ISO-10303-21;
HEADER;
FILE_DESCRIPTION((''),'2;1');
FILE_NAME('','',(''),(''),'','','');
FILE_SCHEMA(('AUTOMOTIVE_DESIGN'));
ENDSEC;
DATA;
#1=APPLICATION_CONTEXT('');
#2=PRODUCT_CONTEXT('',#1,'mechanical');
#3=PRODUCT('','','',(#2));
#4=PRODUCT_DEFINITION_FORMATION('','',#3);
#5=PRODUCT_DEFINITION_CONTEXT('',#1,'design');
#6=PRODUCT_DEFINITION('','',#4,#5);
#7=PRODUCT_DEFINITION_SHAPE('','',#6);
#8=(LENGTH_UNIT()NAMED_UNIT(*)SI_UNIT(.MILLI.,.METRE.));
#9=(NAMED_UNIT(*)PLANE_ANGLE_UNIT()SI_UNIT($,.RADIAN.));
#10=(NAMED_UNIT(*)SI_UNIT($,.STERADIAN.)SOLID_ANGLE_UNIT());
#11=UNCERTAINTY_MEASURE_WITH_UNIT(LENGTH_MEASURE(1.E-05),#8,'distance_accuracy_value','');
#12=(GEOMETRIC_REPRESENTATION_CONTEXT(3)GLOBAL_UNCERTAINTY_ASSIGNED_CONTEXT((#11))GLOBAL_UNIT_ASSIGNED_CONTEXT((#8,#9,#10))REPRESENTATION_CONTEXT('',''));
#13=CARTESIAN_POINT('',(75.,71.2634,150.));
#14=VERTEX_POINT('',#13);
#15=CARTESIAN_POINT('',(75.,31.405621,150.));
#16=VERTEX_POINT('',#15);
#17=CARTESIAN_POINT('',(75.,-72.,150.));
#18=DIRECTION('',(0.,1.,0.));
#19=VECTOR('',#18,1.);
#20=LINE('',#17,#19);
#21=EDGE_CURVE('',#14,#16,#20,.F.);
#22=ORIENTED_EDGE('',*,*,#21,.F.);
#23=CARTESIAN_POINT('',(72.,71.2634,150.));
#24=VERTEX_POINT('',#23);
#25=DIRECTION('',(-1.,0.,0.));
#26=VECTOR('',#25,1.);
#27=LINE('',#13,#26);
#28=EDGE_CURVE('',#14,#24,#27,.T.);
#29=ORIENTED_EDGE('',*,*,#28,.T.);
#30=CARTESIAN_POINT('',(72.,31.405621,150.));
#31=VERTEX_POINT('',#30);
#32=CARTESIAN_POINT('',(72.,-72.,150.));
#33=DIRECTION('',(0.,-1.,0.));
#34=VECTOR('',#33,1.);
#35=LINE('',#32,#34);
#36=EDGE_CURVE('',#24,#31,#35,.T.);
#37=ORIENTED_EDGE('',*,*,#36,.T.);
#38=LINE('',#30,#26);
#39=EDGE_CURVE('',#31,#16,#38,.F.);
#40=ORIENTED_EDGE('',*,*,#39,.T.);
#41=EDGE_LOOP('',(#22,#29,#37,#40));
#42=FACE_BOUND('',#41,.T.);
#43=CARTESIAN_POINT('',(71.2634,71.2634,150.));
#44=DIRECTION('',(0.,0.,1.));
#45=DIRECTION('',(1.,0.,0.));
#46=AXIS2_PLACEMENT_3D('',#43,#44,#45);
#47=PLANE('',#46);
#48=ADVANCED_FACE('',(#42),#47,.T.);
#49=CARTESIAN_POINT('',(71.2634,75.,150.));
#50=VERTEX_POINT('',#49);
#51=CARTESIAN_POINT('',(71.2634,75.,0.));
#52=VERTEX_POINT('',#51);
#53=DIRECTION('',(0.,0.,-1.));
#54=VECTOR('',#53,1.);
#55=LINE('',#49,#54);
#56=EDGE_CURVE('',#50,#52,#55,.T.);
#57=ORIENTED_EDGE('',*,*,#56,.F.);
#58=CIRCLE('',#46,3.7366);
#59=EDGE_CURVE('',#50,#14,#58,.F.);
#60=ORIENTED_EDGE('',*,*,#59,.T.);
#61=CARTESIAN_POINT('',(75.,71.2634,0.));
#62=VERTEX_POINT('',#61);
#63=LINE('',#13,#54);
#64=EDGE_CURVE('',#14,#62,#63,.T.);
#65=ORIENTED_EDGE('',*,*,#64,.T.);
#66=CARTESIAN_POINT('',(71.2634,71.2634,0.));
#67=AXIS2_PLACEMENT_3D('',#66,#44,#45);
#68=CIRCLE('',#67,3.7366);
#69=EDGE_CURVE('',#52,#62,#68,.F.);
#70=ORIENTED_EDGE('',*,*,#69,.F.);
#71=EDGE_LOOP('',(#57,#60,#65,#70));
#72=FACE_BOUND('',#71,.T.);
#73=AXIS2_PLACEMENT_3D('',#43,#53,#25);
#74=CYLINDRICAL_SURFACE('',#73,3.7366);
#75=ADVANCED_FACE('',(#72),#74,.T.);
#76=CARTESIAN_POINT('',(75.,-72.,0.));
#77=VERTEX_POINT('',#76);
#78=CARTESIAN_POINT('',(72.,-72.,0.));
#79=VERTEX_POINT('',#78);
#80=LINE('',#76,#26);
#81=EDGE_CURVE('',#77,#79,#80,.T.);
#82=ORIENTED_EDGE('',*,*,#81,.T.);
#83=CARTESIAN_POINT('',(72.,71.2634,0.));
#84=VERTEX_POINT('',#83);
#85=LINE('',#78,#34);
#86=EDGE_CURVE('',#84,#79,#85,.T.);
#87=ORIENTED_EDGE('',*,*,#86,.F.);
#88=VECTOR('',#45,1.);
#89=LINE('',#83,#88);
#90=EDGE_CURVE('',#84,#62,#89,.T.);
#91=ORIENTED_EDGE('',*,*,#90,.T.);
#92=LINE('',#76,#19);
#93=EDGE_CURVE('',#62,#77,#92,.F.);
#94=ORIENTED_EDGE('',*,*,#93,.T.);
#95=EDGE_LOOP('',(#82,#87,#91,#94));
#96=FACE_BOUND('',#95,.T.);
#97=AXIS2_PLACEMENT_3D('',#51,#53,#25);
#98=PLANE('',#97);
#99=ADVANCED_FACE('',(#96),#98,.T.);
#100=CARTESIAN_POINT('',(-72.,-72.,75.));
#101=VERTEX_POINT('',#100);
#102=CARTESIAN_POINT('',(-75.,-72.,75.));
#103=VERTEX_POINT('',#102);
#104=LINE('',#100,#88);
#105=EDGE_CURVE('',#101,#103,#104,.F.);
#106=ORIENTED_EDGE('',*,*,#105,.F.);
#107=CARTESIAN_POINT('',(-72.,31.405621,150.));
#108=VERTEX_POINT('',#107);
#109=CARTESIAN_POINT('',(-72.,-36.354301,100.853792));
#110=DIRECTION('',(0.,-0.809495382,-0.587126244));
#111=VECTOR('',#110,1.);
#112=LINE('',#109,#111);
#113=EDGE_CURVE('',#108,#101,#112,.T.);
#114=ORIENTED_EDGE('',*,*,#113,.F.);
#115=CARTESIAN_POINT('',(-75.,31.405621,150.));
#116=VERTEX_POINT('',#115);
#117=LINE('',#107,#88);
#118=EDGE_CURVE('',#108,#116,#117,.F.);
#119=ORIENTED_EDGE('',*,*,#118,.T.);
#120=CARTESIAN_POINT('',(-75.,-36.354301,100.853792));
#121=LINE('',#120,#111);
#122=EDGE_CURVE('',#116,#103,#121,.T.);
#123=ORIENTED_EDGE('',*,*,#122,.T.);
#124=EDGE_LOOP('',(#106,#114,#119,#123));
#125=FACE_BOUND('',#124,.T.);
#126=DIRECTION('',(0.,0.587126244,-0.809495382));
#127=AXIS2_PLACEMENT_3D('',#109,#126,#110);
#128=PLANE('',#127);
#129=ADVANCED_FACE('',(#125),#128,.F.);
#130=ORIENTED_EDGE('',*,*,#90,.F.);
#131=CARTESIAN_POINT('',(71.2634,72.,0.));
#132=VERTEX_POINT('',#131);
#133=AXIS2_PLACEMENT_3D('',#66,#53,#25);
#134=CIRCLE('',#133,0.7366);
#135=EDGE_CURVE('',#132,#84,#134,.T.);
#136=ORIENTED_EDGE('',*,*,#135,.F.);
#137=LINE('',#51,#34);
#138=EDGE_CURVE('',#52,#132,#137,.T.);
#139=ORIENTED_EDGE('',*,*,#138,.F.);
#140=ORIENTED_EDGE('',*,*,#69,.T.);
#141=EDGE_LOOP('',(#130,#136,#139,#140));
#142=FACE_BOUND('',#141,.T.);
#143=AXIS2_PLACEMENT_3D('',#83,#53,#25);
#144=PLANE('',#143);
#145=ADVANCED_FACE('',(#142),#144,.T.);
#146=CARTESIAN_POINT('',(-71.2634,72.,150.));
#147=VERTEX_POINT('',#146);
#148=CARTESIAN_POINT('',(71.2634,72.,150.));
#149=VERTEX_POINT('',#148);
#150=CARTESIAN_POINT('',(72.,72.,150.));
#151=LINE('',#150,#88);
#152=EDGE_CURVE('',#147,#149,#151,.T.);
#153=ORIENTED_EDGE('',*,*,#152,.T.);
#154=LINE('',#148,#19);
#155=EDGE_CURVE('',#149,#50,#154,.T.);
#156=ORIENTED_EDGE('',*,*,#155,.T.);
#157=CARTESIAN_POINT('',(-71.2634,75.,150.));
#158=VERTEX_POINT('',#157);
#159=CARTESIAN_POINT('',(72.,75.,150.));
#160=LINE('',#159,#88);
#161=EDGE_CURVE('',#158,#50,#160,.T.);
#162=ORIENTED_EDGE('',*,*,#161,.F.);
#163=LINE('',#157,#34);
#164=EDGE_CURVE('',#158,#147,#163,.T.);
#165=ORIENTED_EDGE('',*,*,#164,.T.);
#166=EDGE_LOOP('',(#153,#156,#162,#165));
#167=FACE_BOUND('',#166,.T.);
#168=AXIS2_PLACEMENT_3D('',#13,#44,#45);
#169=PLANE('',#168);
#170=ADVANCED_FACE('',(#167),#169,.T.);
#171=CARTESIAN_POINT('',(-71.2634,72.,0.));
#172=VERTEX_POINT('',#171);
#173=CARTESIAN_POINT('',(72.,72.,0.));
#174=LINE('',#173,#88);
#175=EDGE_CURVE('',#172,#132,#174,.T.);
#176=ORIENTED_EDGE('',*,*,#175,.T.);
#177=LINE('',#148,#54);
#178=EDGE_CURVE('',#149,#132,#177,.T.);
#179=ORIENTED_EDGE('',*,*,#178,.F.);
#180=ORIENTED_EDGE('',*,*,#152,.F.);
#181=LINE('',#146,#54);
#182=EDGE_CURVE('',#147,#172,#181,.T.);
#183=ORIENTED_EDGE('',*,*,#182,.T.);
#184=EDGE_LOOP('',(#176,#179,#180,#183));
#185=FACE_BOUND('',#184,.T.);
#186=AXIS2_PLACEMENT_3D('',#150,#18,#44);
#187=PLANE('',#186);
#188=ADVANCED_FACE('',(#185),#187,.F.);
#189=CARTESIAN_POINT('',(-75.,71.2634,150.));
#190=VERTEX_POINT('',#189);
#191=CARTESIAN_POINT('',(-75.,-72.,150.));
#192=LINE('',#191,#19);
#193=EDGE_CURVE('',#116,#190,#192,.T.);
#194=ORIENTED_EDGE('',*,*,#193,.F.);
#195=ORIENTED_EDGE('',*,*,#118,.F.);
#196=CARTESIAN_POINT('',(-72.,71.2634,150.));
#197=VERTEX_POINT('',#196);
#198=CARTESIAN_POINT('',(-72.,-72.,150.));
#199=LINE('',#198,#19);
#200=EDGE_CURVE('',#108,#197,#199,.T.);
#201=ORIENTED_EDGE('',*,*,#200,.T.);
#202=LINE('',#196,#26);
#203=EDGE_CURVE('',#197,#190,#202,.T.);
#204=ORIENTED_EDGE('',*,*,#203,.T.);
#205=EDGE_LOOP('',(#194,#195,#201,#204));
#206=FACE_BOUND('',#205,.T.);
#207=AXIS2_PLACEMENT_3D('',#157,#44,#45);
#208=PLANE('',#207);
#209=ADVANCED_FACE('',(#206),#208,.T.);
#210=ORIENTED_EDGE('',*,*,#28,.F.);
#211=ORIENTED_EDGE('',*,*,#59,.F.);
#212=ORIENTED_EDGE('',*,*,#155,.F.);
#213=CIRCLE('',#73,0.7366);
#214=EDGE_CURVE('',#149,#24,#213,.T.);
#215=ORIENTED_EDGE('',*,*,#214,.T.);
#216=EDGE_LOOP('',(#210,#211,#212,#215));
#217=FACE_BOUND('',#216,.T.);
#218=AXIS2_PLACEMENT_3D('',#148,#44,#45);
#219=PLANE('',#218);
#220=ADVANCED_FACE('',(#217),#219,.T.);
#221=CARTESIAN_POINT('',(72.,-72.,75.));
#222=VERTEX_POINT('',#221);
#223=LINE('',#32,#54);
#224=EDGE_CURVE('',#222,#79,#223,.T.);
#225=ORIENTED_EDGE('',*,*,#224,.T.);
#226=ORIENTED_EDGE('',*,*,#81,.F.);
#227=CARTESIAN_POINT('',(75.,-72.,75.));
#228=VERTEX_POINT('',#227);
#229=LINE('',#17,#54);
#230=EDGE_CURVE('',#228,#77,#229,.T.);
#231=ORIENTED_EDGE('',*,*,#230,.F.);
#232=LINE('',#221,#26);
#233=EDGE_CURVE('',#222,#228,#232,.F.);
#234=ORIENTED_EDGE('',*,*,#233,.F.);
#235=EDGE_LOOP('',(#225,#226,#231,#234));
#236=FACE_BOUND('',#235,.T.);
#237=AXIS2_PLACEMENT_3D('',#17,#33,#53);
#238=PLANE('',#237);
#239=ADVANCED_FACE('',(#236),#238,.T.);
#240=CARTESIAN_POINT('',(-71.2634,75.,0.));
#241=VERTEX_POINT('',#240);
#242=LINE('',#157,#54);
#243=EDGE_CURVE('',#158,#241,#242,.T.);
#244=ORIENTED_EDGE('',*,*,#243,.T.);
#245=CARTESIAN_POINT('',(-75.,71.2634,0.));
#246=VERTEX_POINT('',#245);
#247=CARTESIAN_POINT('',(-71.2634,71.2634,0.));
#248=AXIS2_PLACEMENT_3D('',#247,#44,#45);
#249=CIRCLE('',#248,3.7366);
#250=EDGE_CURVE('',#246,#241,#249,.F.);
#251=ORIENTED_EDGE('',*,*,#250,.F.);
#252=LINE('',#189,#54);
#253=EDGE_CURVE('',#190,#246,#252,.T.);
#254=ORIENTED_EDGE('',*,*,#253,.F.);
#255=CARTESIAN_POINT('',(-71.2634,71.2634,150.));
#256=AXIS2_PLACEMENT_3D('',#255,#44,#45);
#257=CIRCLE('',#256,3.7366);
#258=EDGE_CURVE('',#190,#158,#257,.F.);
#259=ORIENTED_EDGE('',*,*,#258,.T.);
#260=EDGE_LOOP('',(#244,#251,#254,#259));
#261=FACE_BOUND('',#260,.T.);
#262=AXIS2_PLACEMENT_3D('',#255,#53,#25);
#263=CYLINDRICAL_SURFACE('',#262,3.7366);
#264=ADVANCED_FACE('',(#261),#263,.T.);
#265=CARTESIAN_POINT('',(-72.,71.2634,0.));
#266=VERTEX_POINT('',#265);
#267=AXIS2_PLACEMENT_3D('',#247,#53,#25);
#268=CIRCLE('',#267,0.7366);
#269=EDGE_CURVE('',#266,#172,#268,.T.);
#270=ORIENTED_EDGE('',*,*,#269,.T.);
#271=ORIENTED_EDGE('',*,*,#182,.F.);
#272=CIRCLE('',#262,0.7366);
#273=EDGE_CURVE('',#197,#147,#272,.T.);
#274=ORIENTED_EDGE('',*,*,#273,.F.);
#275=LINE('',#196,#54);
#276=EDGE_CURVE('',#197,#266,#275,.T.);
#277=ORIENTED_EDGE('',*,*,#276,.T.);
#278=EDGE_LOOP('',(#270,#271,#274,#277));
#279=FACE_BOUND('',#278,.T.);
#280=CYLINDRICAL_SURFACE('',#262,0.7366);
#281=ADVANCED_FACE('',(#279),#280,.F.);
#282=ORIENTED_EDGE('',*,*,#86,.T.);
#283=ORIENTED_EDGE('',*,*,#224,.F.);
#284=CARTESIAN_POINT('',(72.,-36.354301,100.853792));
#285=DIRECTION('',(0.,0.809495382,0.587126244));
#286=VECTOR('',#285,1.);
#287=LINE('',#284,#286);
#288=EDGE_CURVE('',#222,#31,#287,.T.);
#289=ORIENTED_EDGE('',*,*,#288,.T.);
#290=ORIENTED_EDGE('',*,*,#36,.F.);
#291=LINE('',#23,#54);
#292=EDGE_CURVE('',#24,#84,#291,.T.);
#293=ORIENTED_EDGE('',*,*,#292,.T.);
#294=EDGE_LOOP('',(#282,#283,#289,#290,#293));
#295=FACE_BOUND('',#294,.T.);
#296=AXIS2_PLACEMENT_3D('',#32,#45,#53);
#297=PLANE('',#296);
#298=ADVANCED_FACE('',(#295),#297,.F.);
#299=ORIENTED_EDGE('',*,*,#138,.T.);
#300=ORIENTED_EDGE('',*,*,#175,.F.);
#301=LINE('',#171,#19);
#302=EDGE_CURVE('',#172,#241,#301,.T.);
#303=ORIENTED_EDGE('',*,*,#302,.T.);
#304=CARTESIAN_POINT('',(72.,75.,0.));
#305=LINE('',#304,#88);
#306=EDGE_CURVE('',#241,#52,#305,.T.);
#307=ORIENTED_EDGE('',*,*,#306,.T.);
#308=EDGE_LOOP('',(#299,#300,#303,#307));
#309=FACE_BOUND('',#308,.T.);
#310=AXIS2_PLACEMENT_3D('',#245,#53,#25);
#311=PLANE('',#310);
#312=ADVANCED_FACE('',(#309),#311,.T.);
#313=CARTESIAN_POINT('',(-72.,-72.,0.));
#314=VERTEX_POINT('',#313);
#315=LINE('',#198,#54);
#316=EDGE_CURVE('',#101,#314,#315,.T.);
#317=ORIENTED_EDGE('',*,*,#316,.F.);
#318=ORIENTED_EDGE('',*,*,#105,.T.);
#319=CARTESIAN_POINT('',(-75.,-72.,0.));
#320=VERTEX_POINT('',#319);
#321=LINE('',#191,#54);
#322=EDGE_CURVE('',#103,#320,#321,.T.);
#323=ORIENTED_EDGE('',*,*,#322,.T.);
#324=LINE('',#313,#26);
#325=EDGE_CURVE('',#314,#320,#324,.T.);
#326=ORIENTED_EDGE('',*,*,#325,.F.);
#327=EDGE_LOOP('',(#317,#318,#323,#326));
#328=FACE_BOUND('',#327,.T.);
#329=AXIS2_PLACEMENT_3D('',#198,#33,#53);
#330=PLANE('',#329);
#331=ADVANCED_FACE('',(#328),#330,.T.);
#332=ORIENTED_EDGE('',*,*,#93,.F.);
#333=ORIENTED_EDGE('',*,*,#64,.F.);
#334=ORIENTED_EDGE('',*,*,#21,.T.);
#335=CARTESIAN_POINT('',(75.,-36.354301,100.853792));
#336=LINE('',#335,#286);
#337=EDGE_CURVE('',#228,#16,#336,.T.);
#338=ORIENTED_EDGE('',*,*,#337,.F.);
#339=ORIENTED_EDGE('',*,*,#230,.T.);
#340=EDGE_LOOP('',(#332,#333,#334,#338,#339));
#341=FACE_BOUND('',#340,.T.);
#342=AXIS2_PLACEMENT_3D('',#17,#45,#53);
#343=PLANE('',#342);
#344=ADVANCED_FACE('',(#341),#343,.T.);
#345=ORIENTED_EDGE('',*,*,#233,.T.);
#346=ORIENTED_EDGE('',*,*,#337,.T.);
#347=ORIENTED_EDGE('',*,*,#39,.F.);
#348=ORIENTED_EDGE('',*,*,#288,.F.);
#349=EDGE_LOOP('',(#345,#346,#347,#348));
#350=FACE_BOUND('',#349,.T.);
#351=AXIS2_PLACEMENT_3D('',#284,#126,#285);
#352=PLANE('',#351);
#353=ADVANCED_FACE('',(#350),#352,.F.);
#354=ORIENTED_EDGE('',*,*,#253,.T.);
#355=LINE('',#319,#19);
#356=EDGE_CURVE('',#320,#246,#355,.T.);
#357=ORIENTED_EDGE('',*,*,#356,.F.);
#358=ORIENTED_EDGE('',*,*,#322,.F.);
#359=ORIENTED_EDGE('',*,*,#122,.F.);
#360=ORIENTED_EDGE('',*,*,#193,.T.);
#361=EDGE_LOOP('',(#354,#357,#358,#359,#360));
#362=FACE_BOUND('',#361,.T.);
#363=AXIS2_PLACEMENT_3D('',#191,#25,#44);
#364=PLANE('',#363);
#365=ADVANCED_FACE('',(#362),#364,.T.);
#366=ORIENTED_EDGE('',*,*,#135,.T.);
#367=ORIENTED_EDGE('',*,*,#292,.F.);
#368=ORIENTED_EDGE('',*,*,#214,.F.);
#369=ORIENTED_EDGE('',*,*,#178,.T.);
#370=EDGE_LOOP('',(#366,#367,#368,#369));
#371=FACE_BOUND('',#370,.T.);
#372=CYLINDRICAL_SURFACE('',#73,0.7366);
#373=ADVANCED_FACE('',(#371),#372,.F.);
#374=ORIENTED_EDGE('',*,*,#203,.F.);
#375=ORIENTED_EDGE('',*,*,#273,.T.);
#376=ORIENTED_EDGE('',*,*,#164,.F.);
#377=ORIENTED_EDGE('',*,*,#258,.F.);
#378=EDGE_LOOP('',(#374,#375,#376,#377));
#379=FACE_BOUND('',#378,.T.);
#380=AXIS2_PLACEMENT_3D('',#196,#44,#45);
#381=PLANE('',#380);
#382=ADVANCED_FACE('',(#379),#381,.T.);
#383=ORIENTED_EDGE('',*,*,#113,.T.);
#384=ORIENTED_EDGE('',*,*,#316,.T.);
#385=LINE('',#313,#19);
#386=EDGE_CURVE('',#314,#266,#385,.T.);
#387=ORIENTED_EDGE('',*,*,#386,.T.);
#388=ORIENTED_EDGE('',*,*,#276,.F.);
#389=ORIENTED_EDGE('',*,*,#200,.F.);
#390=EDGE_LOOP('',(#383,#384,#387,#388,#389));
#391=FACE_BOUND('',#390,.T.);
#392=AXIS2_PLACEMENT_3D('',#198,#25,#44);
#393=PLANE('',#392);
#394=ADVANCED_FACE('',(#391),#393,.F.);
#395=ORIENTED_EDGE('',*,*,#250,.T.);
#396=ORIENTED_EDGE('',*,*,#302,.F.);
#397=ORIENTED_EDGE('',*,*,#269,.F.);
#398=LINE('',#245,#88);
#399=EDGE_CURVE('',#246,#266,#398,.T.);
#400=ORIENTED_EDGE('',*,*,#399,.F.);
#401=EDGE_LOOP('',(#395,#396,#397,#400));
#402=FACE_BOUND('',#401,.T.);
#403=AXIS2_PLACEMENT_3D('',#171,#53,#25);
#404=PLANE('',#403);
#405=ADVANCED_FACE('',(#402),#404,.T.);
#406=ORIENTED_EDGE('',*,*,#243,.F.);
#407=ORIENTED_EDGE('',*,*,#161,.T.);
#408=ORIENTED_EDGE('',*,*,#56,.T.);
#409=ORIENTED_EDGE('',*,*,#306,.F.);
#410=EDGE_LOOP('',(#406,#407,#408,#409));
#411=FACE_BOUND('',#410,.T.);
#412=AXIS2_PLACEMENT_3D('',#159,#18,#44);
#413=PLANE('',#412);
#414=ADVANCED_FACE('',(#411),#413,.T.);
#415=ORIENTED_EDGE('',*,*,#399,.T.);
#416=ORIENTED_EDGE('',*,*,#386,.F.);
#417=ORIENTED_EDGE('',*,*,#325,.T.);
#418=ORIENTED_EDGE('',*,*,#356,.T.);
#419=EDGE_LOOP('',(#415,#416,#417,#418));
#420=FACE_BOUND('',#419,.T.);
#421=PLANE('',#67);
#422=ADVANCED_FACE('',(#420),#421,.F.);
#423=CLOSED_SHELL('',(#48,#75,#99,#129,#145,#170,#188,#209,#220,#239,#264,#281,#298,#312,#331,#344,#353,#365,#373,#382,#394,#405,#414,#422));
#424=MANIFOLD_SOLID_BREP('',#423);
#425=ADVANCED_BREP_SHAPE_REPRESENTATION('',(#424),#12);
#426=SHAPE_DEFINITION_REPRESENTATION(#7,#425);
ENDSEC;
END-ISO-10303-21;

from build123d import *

# Parameters (mm, degrees)
BASE_FLANGE1_DEPTH = 150
CUT_EXTRUDE1_DEPTH = 226


# Sheet-metal steps are written as plain solids
with BuildPart() as part:
    # Sketch1 → Base-Flange1 (new body)
    with BuildSketch(Plane.XY):
        with BuildLine():
            Line((72, -72), (72, 71.2634))
            ThreePointArc((72, 71.2634), (71.784254855, 71.784254855), (71.2634, 72))
            Line((71.2634, 72), (-71.2634, 72))
            ThreePointArc((-71.2634, 72), (-71.784254855, 71.784254855), (-72, 71.2634))
            Line((-72, 71.2634), (-72, -72))
            Line((-72, -72), (-75, -72))
            Line((-75, -72), (-75, 71.2634))
            ThreePointArc((-75, 71.2634), (-73.905575199, 73.905575199), (-71.2634, 75))
            Line((-71.2634, 75), (71.2634, 75))
            ThreePointArc((71.2634, 75), (73.905575199, 73.905575199), (75, 71.2634))
            Line((75, 71.2634), (75, -72))
            Line((75, -72), (72, -72))
        make_face()
    extrude(amount=BASE_FLANGE1_DEPTH)

    # Sketch6 → Cut-Extrude1 (cut, through all)
    with BuildSketch(Plane.ZY.offset(75)):
        Polygon((75, -72), (150, 31.405620606), (170.305781078, 31.405620606), (170.305781078, -96.262552323), (75, -96.262552323), align=None)
    extrude(amount=-CUT_EXTRUDE1_DEPTH, mode=Mode.SUBTRACT)


solid = part.part
